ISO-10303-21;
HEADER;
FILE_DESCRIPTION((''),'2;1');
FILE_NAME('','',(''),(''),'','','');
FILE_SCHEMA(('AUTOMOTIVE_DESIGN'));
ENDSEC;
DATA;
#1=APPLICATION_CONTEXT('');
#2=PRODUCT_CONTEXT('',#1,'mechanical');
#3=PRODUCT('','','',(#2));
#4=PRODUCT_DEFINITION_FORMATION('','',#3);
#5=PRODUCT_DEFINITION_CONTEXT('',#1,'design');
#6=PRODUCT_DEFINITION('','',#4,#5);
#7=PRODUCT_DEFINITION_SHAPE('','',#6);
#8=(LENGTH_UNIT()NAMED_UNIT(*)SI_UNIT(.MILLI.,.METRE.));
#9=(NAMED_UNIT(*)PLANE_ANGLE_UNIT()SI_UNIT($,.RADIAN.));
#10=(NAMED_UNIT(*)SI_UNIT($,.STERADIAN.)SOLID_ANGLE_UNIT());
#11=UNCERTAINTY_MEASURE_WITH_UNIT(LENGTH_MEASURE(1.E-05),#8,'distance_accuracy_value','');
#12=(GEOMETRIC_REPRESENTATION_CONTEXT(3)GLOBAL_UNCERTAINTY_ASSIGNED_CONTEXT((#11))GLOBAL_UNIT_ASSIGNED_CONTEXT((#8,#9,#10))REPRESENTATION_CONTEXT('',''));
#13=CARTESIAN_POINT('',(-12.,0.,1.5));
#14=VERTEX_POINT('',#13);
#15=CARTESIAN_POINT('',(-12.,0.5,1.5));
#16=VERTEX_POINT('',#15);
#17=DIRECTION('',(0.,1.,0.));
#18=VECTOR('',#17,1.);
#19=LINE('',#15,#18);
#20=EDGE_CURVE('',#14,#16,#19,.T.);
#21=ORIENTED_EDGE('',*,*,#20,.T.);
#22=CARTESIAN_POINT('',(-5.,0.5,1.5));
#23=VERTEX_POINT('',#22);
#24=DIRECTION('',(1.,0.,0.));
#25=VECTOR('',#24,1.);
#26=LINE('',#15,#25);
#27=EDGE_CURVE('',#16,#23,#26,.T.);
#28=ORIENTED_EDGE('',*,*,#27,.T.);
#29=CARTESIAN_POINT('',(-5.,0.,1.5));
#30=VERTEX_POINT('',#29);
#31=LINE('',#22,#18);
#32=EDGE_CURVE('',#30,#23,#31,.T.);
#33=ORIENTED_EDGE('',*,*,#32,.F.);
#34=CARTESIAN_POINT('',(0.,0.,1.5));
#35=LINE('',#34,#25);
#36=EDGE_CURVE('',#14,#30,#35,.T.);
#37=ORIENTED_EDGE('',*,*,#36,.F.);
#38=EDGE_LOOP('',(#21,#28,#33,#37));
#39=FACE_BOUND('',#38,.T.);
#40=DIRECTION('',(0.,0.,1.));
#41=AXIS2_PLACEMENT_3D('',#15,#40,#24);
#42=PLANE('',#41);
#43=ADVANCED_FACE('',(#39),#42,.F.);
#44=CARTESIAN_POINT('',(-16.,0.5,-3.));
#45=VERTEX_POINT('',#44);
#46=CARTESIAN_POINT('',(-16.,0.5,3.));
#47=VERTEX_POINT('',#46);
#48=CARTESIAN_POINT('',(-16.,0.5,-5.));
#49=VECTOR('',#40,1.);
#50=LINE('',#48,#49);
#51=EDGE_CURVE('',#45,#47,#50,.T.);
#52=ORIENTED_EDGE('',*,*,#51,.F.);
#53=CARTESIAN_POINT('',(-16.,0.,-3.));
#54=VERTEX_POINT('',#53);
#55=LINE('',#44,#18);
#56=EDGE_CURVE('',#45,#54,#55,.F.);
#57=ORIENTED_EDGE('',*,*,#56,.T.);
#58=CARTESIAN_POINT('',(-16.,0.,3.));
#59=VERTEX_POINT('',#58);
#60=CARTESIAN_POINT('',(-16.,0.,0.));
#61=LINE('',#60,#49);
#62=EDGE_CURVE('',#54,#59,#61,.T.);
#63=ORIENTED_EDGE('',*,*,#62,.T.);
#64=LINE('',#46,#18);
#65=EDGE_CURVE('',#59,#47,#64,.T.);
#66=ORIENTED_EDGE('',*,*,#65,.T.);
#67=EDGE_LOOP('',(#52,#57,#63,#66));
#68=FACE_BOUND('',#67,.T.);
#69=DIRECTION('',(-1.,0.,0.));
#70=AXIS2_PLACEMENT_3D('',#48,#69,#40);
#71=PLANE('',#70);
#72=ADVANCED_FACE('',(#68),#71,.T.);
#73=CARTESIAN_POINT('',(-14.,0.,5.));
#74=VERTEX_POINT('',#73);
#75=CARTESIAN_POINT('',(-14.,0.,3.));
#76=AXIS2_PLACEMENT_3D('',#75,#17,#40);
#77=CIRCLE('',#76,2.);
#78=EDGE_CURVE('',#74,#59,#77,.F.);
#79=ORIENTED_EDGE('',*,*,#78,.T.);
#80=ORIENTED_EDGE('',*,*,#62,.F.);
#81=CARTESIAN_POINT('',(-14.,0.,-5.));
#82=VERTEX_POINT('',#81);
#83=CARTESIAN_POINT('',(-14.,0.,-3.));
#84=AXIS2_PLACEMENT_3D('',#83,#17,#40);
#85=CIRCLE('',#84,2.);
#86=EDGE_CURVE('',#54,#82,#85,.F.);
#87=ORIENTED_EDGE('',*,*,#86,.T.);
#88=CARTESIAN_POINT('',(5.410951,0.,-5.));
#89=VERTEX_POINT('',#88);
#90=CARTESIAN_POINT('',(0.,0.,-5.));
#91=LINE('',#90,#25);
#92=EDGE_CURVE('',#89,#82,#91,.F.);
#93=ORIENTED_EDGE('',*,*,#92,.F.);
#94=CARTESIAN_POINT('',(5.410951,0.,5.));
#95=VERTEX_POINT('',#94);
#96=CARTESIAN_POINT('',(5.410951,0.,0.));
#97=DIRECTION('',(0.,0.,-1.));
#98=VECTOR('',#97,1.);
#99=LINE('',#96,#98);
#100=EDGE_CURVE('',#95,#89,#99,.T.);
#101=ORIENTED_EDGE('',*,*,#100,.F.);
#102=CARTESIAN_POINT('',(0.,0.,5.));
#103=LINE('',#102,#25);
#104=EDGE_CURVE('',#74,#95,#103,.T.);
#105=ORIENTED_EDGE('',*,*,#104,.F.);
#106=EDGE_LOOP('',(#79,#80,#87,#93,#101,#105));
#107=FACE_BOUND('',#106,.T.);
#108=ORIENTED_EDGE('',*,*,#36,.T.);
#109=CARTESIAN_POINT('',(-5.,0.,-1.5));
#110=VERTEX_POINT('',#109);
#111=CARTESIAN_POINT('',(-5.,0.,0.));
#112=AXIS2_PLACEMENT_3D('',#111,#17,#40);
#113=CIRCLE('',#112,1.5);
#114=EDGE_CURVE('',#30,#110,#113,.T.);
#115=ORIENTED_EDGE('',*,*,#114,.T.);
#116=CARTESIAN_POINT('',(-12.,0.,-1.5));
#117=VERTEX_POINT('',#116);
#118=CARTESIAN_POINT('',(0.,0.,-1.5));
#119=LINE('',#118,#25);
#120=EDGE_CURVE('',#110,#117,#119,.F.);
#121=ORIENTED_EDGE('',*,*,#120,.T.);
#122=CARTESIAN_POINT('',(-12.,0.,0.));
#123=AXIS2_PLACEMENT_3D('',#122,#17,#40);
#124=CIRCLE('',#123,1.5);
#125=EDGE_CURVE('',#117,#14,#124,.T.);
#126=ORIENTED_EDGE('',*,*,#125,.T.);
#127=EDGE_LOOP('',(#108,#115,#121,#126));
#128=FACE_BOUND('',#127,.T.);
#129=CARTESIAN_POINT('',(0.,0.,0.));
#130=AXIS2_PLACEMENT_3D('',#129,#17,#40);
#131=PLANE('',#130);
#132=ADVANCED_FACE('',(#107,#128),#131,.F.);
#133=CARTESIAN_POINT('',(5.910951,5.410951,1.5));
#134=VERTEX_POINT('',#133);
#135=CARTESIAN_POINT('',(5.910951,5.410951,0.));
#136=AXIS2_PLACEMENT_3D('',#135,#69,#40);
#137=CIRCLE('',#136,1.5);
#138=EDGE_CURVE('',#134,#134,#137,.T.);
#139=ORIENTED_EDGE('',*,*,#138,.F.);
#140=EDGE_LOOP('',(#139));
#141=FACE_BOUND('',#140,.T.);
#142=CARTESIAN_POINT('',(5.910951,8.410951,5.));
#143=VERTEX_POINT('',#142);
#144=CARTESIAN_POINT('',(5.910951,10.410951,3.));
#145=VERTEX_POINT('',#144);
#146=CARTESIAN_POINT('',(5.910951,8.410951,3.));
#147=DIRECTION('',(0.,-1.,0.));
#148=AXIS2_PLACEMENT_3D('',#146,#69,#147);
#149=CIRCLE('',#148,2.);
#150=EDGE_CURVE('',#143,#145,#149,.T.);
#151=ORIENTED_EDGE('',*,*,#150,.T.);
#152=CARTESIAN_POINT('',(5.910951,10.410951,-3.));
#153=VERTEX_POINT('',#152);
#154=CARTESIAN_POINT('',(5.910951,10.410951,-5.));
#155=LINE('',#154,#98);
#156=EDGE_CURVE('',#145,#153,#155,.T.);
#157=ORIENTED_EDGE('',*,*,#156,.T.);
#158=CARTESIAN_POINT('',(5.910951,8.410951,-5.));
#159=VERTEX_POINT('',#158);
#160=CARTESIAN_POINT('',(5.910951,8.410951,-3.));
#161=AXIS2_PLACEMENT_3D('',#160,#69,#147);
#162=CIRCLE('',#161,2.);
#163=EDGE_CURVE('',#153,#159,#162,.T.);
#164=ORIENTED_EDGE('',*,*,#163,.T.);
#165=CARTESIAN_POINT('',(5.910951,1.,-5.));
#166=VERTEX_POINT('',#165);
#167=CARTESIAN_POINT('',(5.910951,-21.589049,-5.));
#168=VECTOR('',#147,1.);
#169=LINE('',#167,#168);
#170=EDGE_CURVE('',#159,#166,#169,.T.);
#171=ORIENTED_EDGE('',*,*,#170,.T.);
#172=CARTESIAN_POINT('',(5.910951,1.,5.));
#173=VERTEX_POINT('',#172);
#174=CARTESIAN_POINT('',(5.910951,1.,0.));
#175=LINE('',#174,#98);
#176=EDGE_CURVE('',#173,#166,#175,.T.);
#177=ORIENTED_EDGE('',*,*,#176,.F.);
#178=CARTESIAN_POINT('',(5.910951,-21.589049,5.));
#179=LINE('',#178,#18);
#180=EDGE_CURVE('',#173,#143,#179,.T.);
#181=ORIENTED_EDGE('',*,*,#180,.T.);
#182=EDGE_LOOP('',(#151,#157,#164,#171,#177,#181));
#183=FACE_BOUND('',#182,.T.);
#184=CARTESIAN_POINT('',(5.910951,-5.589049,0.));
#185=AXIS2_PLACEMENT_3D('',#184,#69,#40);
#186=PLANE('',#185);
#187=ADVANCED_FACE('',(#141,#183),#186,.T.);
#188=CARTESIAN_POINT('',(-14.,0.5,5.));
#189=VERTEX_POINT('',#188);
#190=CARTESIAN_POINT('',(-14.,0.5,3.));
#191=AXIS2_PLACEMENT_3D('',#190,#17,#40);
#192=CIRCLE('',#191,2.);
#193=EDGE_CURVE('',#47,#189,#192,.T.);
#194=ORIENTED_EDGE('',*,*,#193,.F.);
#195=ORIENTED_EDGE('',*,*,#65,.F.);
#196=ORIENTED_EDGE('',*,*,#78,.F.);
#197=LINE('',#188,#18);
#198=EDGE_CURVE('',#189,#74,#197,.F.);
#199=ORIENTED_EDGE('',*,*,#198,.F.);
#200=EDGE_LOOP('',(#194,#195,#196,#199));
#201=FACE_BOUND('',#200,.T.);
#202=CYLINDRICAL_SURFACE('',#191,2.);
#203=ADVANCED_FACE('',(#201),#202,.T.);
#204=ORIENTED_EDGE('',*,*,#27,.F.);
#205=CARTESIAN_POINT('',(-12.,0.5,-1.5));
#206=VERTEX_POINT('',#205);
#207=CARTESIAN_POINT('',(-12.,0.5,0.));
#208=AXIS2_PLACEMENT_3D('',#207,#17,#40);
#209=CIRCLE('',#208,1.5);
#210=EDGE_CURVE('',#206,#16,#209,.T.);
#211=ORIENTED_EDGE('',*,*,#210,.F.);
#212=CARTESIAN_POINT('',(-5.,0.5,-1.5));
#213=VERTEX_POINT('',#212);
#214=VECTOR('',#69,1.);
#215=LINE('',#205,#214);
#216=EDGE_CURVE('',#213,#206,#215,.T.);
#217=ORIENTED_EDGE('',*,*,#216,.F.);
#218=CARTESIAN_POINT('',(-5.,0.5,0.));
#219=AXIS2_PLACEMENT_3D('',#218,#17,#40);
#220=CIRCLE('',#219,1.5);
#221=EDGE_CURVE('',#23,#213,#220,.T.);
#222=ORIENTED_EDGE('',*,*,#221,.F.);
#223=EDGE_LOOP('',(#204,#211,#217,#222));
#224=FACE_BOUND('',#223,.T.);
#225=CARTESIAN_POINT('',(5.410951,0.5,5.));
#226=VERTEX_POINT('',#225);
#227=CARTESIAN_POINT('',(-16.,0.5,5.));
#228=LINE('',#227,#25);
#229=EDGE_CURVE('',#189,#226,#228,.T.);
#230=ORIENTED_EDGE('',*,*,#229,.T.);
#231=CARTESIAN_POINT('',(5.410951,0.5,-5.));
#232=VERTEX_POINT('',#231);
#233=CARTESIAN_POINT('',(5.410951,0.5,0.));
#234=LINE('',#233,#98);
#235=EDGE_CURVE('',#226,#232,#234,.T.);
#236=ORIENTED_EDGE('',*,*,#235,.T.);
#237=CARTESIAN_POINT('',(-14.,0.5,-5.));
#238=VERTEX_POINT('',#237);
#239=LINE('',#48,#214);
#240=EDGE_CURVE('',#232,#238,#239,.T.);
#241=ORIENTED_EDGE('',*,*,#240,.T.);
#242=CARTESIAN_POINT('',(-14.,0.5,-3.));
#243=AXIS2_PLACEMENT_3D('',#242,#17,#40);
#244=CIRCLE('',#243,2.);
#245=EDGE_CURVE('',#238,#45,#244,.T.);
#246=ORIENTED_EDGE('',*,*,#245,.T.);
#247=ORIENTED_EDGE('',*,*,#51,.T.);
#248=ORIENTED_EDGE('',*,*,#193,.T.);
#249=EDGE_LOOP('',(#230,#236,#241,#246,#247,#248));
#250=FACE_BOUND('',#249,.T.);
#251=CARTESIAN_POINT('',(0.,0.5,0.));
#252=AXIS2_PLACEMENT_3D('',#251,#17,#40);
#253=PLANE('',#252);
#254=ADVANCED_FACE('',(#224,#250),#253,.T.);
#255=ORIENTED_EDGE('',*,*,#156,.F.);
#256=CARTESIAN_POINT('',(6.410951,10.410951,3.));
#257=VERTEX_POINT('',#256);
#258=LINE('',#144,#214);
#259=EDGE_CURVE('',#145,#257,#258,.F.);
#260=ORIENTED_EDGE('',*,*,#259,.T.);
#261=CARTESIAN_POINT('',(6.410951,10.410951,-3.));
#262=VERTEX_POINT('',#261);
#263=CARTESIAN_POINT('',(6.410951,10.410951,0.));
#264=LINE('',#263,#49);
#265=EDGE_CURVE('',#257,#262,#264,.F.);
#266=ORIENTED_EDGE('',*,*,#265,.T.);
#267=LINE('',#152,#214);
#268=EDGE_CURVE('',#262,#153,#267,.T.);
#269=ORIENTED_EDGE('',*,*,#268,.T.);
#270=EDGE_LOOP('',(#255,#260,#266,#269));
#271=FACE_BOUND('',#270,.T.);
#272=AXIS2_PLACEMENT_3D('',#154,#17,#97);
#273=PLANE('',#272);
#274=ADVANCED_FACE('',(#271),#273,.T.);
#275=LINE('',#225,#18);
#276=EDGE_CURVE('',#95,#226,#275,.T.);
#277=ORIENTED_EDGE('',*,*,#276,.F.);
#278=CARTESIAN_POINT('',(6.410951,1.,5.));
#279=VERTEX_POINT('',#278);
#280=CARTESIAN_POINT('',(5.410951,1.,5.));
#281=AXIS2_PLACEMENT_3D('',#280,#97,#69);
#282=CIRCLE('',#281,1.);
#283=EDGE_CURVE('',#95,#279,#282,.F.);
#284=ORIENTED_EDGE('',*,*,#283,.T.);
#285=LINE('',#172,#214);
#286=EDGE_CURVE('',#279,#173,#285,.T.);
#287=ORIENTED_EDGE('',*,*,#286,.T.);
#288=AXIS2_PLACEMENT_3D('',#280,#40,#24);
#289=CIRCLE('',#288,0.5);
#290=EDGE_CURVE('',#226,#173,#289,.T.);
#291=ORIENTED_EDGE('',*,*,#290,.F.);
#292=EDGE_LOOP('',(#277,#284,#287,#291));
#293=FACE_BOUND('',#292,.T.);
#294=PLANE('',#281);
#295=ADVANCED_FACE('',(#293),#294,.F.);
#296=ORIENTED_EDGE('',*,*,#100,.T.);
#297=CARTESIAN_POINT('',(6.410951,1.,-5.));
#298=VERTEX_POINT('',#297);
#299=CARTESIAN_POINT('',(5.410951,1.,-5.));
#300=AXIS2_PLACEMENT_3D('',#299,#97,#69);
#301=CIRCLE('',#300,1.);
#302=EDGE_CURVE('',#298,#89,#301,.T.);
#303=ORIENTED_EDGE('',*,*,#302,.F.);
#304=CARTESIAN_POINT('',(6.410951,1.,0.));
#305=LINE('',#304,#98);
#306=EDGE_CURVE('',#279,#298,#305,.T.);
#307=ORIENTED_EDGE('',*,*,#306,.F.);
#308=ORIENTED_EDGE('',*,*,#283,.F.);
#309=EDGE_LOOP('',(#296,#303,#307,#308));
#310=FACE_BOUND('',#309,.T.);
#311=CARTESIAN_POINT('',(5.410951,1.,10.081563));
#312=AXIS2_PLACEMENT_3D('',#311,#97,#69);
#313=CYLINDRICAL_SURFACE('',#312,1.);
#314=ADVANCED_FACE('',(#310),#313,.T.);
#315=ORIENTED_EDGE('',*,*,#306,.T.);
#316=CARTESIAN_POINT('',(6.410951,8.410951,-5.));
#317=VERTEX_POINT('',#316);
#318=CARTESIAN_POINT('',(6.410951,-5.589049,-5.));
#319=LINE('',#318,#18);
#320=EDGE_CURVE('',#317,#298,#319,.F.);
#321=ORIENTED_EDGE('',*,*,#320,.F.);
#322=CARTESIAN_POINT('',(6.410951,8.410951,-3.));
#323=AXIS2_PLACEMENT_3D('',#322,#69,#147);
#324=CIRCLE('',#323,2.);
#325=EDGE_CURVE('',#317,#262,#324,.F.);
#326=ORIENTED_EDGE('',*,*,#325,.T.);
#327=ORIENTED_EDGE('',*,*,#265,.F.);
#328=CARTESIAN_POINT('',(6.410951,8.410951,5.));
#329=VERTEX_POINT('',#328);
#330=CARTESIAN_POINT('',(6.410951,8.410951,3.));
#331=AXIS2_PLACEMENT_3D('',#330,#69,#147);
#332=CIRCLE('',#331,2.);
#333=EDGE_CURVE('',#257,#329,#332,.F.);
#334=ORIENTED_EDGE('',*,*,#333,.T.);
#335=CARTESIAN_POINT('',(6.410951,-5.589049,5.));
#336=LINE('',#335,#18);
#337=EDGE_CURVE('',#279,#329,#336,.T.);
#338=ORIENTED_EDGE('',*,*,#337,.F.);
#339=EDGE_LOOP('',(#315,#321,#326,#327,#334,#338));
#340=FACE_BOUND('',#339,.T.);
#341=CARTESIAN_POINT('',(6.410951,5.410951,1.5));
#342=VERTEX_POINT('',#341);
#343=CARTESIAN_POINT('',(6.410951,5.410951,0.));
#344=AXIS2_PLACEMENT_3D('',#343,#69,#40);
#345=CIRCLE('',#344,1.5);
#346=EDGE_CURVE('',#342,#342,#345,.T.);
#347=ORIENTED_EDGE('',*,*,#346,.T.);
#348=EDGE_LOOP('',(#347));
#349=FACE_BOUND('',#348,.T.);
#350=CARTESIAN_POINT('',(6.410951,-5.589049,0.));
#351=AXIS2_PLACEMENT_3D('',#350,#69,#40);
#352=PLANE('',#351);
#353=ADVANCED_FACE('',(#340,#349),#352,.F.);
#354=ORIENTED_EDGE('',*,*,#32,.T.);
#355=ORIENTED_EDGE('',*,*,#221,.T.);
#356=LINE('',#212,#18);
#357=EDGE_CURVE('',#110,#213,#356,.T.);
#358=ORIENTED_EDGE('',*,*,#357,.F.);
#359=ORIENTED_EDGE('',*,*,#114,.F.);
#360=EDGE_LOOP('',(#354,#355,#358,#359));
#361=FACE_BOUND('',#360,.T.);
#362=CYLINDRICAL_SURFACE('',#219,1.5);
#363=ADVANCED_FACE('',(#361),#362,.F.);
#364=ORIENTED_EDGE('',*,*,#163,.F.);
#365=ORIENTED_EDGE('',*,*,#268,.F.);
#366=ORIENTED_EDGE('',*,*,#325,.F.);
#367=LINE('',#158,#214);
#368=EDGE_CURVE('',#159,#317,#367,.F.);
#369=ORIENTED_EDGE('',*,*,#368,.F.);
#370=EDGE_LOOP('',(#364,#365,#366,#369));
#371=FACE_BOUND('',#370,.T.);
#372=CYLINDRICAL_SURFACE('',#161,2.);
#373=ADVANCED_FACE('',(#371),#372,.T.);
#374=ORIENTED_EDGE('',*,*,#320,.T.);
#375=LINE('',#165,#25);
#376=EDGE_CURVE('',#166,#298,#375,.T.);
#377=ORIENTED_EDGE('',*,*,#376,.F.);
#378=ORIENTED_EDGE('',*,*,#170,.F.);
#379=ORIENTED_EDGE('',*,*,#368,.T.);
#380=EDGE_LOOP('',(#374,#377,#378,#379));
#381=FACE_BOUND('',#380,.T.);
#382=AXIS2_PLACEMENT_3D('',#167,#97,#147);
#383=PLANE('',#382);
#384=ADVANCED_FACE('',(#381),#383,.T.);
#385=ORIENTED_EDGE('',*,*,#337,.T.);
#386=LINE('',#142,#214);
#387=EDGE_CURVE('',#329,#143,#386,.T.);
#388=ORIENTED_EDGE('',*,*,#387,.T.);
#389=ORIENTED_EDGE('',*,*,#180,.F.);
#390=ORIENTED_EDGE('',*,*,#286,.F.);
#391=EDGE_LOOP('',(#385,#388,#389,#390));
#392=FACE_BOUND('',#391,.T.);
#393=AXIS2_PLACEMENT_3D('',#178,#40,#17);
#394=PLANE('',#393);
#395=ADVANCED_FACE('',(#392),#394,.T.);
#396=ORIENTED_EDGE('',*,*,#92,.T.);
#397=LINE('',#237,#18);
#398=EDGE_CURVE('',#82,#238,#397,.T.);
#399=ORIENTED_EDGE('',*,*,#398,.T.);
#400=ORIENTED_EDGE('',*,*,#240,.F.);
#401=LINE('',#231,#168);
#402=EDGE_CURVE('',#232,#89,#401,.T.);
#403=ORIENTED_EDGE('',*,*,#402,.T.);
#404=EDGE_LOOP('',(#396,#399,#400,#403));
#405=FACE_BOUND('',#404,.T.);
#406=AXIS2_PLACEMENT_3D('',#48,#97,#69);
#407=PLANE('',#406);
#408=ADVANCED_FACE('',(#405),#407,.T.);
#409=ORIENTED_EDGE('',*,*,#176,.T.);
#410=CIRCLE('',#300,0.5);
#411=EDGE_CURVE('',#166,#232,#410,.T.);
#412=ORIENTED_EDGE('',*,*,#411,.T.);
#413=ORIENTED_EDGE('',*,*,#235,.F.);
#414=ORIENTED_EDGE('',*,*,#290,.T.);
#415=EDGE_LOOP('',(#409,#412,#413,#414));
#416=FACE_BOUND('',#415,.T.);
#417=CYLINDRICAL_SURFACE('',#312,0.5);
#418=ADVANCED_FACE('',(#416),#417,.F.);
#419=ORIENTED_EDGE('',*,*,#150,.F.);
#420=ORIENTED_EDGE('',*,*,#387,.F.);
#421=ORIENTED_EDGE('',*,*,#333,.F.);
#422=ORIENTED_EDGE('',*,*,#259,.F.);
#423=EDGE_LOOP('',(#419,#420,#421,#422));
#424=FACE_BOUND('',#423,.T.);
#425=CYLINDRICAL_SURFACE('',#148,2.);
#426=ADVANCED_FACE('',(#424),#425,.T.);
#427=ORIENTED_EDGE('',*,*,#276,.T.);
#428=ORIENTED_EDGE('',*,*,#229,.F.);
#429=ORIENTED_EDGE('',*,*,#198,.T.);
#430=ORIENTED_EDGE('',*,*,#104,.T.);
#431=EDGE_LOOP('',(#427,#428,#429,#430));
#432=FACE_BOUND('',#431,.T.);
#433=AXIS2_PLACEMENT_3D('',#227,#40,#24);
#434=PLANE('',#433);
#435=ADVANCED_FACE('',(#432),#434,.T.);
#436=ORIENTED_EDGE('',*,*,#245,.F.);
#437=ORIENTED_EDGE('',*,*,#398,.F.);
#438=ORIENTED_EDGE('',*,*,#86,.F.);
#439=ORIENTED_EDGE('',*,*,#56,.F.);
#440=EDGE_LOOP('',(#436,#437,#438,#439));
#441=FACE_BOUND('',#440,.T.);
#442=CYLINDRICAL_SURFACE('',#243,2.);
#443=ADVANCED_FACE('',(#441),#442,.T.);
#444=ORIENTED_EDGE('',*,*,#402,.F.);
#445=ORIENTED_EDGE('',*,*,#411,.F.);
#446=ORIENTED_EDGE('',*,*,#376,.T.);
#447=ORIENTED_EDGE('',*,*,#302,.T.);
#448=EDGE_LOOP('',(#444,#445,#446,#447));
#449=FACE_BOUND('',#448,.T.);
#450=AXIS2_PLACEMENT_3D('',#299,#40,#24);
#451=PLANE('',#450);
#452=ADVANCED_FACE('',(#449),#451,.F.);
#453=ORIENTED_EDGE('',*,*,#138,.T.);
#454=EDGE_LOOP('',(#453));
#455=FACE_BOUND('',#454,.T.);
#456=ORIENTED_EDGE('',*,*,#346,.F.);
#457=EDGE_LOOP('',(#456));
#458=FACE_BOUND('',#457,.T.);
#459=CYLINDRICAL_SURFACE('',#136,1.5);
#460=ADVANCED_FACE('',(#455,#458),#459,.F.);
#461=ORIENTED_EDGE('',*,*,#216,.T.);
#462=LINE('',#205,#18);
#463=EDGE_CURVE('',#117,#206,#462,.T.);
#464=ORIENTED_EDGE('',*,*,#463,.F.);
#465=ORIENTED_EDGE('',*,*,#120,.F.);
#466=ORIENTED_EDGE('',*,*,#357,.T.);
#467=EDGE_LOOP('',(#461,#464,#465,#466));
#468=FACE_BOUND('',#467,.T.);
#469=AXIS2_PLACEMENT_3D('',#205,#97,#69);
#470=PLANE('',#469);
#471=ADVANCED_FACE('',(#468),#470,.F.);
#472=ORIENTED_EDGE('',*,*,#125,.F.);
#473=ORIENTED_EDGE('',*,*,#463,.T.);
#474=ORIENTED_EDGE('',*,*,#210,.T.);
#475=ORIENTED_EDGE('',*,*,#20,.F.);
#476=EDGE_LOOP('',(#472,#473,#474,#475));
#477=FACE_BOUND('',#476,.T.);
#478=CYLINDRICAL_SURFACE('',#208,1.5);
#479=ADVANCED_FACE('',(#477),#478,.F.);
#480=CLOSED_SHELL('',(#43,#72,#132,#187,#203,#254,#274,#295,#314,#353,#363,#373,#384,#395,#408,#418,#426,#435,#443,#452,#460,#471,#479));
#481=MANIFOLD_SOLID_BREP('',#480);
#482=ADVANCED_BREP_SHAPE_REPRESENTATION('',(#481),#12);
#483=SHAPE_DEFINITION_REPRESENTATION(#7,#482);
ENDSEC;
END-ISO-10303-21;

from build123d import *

# Parameters (mm, degrees)
SKETCH_1_W          = 32
SKETCH_1_H          = 10
SKETCH_1_R          = 1.5
EXTRUDE_1_DEPTH     = 0.5
OTHER_START         = -5
OTHER_1_DEPTH       = 10
OTHER_1_2_DEPTH     = 3.4999999
OTHER_START_2       = 1.5000001
OTHER_1_3_DEPTH     = 3.4999999
OTHER_START_3       = -1.5000001
OTHER_1_4_DEPTH     = 3.0000001
OTHER_START_4       = 5.910951377
OTHER_1_5_OUTLINE_R = 1.5
OTHER_1_5_DEPTH     = 0.5
FILLET_1_R          = 2


with BuildPart() as part:
    # Sketch 1 → Бобышка-Вытянуть1 (new body)
    with BuildSketch(Plane(origin=(0, 0, 0), x_dir=(1, 0, 0), z_dir=(0, 1, 0))):
        Rectangle(SKETCH_1_W, SKETCH_1_H)
        with Locations(Location((11, 0, 0), (0, 0, 270))):
            Circle(SKETCH_1_R, mode=Mode.SUBTRACT)
        with BuildLine():
            Line((-12, 1.5), (-5, 1.5))
            ThreePointArc((-5, 1.5), (-3.5, 0), (-5, -1.5))
            Line((-5, -1.5), (-12, -1.5))
            ThreePointArc((-12, -1.5), (-13.5, 0), (-12, 1.5))
        make_face(mode=Mode.SUBTRACT)
    extrude(amount=EXTRUDE_1_DEPTH)

    # Other 1: read off the stored shape, not the designer's step
    # Other 1 outline → Other 1 (cut)
    with BuildSketch(Plane.XY.offset(OTHER_START)):
        with BuildLine():
            Line((16, 0.5), (6.276976781, 0.5))
            ThreePointArc((6.276976781, 0.5), (5.910951377, 0.133974596), (5.410951377, 0))
            Line((5.410951377, 0), (16, 0))
            Line((16, 0), (16, 0.5))
        make_face()
    extrude(amount=OTHER_1_DEPTH, mode=Mode.SUBTRACT)

    # Other 1 2 outline → Other 1 2 (add)
    with BuildSketch(Plane.XY.offset(OTHER_START)):
        with BuildLine():
            Line((6.410951377, 1), (6.410951377, 10.410951377))
            Line((6.410951377, 10.410951377), (5.910951377, 10.410951377))
            Line((5.910951377, 10.410951377), (5.910951377, 1))
            ThreePointArc((5.910951377, 1), (5.764504768, 0.646446609), (5.410951377, 0.5))
            Line((5.410951377, 0.5), (6.276976781, 0.5))
            ThreePointArc((6.276976781, 0.5), (6.376877204, 0.741180955), (6.410951377, 1))
        make_face()
    extrude(amount=OTHER_1_2_DEPTH)

    # Other 1 3 outline → Other 1 3 (add)
    with BuildSketch(Plane.XY.offset(OTHER_START_2)):
        with BuildLine():
            Line((6.410951377, 1), (6.410951377, 10.410951377))
            Line((6.410951377, 10.410951377), (5.910951377, 10.410951377))
            Line((5.910951377, 10.410951377), (5.910951377, 1))
            ThreePointArc((5.910951377, 1), (5.764504768, 0.646446609), (5.410951377, 0.5))
            Line((5.410951377, 0.5), (6.276976781, 0.5))
            ThreePointArc((6.276976781, 0.5), (6.376877204, 0.741180955), (6.410951377, 1))
        make_face()
    extrude(amount=OTHER_1_3_DEPTH)

    # Other 1 4 outline → Other 1 4 (add)
    with BuildSketch(Plane.XY.offset(OTHER_START_3)):
        with BuildLine():
            Line((6.410951377, 1), (6.410951377, 10.410951377))
            Line((6.410951377, 10.410951377), (5.910951377, 10.410951377))
            Line((5.910951377, 10.410951377), (5.910951377, 1))
            ThreePointArc((5.910951377, 1), (5.764504768, 0.646446609), (5.410951377, 0.5))
            Line((5.410951377, 0.5), (6.276976781, 0.5))
            ThreePointArc((6.276976781, 0.5), (6.376877204, 0.741180955), (6.410951377, 1))
        make_face()
    extrude(amount=OTHER_1_4_DEPTH)

    # Other 1 5 outline → Other 1 5 (cut)
    with BuildSketch(Plane.YZ.offset(OTHER_START_4)):
        with Locations((5.410951377, 0)):
            Circle(OTHER_1_5_OUTLINE_R)
    extrude(amount=OTHER_1_5_DEPTH, mode=Mode.SUBTRACT)

    # Скругление1
    fillet_1_edges = [part.edges().sort_by_distance(p)[0] for p in [
        (6.160951377, 10.410951377, -5),
        (6.160951377, 10.410951377, 5),
        (-16, 0.25, 5),
        (-16, 0.25, -5),
    ]]
    fillet(fillet_1_edges, radius=FILLET_1_R)


solid = part.part
